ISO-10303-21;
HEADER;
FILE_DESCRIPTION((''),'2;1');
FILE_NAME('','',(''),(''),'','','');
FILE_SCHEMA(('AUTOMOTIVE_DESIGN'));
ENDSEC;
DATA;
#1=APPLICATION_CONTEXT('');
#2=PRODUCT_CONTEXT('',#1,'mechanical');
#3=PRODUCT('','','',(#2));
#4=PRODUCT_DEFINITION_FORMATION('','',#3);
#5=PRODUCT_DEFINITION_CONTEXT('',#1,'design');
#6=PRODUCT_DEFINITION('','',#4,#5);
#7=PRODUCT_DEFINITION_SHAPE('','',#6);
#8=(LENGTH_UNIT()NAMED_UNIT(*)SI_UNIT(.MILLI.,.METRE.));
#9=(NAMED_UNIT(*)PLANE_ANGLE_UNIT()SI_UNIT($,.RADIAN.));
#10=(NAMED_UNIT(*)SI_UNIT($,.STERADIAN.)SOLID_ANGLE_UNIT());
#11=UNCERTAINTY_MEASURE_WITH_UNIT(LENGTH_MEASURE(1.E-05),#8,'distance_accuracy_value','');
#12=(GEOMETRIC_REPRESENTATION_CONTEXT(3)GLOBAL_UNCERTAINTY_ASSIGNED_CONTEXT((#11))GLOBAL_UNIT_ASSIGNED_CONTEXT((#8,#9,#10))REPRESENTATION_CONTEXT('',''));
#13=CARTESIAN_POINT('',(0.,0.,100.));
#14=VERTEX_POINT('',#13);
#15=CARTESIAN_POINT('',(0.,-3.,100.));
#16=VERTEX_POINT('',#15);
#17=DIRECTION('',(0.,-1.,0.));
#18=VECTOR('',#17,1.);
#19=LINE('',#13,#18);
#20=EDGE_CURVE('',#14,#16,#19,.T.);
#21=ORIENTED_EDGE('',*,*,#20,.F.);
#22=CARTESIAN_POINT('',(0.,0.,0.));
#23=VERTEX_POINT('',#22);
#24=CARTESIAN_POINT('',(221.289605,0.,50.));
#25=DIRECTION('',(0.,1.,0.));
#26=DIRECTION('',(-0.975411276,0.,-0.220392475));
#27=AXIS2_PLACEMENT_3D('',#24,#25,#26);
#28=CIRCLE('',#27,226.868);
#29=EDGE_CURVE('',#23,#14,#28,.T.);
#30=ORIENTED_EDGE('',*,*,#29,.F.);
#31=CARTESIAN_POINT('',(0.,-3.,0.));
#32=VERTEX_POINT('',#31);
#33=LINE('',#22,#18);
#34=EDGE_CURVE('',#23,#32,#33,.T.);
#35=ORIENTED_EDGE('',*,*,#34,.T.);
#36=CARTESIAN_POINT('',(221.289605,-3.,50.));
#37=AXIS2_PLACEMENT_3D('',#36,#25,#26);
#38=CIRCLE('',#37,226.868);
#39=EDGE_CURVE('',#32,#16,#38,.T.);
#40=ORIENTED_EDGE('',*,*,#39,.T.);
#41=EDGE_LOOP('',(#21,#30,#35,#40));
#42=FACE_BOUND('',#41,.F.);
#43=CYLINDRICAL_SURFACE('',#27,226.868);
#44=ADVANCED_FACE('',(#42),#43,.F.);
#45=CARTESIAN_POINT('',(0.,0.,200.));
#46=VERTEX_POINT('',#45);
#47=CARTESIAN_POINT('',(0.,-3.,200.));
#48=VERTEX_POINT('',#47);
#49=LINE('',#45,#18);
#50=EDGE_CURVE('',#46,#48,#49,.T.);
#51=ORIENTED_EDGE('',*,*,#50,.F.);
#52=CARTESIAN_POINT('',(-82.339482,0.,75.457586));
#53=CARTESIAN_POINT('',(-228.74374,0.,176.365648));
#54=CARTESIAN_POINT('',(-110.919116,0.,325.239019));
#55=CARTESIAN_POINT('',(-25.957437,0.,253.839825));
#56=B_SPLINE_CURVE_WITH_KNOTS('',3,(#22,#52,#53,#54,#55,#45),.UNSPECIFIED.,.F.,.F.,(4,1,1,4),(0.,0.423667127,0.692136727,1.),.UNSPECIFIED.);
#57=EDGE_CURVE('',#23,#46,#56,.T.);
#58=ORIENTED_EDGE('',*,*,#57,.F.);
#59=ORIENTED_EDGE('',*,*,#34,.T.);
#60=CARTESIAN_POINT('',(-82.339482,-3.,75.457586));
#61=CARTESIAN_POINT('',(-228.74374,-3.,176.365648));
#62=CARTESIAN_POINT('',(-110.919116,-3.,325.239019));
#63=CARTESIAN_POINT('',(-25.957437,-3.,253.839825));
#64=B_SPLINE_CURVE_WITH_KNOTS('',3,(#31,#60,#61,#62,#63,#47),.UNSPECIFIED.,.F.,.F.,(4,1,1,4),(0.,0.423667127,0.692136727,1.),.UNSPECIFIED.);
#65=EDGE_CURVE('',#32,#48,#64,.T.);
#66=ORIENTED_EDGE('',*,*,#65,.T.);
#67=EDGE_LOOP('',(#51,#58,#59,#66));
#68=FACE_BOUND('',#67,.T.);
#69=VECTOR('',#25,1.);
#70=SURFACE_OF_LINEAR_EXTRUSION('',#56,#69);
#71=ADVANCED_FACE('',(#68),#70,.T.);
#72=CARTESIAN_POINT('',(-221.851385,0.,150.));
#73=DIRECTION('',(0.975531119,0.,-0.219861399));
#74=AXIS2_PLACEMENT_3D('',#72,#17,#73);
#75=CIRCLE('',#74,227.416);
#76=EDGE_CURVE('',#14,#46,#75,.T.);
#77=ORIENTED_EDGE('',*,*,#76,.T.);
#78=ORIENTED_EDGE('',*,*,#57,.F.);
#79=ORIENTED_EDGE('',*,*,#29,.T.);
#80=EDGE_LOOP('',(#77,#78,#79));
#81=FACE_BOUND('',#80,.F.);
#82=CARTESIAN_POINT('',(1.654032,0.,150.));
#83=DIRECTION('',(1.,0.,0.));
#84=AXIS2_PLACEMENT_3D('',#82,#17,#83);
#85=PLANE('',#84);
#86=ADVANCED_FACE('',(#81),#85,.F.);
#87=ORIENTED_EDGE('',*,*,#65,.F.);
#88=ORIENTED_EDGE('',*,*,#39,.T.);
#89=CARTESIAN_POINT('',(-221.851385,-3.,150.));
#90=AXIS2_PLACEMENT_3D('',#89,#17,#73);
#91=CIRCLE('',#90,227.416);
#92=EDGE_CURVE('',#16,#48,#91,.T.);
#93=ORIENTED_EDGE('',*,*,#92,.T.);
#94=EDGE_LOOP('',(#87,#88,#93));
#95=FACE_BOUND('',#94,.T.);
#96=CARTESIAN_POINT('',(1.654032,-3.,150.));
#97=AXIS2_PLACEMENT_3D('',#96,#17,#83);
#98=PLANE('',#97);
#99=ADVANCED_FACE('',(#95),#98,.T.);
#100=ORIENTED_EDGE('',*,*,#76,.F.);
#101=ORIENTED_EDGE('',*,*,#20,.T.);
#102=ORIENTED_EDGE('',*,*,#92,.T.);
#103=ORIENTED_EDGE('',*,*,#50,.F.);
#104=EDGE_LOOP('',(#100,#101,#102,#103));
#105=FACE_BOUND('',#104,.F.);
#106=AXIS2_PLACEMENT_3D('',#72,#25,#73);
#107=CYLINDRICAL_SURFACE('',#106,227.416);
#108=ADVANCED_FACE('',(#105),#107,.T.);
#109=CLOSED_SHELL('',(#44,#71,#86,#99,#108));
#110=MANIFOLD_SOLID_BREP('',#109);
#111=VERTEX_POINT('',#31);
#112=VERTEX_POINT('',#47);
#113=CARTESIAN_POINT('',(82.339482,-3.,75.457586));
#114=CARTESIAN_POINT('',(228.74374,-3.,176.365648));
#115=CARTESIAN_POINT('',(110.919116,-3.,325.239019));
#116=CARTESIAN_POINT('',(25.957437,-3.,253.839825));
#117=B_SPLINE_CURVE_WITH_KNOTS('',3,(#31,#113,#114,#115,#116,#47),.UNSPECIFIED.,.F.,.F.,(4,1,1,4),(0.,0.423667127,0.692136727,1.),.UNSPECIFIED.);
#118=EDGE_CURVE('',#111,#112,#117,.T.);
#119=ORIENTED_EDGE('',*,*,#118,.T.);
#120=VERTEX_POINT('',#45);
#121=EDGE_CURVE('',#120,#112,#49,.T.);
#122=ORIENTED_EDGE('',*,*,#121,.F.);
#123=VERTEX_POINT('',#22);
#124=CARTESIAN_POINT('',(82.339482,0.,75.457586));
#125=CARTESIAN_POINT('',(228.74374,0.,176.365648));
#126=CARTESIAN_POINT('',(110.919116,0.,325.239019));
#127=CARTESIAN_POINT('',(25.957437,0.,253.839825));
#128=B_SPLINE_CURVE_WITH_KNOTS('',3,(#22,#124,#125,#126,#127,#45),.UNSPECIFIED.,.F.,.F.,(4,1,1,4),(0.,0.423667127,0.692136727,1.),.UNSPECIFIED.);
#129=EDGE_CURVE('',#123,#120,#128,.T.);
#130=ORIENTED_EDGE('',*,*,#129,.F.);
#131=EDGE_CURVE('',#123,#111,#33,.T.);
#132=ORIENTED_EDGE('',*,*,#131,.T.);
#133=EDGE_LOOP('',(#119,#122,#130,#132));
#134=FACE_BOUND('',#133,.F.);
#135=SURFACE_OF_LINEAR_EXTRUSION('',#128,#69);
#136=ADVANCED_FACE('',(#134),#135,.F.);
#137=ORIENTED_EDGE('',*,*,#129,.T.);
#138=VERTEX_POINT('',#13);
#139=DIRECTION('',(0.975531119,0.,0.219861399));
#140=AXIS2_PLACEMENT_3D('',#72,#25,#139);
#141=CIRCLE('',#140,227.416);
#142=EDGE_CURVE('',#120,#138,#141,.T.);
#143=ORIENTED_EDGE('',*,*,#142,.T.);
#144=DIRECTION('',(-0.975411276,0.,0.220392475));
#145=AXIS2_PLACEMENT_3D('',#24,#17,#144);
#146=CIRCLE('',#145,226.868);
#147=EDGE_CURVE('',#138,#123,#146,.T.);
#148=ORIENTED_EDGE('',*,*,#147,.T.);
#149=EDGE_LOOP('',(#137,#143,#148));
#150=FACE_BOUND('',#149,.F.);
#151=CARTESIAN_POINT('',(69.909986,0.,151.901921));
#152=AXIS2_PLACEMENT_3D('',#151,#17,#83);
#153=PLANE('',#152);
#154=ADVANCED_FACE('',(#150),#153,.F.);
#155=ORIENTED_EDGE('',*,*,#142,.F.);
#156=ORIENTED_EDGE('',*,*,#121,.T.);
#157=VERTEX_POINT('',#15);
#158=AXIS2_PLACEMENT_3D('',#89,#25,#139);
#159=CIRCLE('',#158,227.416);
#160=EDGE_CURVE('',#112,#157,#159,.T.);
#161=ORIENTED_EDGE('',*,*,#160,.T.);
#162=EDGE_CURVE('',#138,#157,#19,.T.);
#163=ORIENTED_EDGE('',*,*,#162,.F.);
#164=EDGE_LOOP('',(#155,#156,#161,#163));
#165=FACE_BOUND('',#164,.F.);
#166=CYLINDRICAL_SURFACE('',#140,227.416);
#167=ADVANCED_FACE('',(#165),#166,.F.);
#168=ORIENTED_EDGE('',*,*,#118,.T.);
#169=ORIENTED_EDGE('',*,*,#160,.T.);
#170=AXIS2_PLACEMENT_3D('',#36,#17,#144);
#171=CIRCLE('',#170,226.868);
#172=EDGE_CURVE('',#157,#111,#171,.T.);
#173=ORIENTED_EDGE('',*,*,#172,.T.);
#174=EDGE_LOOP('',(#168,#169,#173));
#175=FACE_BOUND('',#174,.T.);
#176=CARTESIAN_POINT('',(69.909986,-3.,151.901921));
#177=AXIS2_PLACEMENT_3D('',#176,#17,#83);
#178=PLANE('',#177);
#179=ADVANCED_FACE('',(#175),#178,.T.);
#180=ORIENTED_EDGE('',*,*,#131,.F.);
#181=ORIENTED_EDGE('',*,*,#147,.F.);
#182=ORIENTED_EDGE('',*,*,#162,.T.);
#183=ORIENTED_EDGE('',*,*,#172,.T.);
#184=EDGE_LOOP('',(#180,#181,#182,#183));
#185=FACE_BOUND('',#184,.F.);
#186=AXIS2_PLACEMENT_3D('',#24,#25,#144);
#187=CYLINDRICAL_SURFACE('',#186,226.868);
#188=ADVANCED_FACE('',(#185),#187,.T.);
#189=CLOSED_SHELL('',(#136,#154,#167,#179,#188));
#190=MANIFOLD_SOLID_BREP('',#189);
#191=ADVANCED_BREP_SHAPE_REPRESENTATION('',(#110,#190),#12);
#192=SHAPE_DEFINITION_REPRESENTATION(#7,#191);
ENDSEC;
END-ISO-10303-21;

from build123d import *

# Parameters (mm, degrees)
F1_DEPTH = 3
F2_DEPTH = 3


# Not quite as in the source:
# - a feature names something its author has since deleted; it is built from what else it names


with BuildPart() as f1:
    # F0 (on Front) → F1 (new body)
    with BuildSketch(Plane.XZ):
        with BuildLine():
            Line((0, 100), (0, 0))
            add(Edge.make_bspline(
                [(0, 0), (82.3394819819, 75.4575862184), (228.7437395074, 176.365648432), (110.9191157227, 325.2390189646), (25.9574372763, 253.8398247218), (0, 200)],
                knots=[0, 0, 0, 0, 0.4236671268, 0.6921367272, 1, 1, 1, 1], degree=3))
            ThreePointArc((0, 200), (5.5646149333, 150), (0, 100))
        make_face()
        with BuildLine():
            ThreePointArc((0, 100), (-5.578394677, 50), (0, 0))
            Line((0, 0), (0, 100))
        make_face()
    extrude(amount=F1_DEPTH)


with BuildPart() as f2:
    # F0 (on Front) → F2 (new body)
    with BuildSketch(Plane.XZ):
        with BuildLine():
            ThreePointArc((0, 100), (5.5646149333, 150), (0, 200))
            Line((0, 200), (0, 100))
        make_face()
        with BuildLine():
            add(Edge.make_bspline(
                [(0, 0), (-82.3394819819, 75.4575862184), (-228.7437395074, 176.365648432), (-110.9191157227, 325.2390189646), (-25.9574372763, 253.8398247218), (0, 200)],
                knots=[0, 0, 0, 0, 0.4236671268, 0.6921367272, 1, 1, 1, 1], degree=3))
            ThreePointArc((0, 0), (-5.578394677, 50), (0, 100))
            Line((0, 100), (0, 200))
        make_face()
    extrude(amount=F2_DEPTH)


solid = Compound([f1.part, f2.part])
